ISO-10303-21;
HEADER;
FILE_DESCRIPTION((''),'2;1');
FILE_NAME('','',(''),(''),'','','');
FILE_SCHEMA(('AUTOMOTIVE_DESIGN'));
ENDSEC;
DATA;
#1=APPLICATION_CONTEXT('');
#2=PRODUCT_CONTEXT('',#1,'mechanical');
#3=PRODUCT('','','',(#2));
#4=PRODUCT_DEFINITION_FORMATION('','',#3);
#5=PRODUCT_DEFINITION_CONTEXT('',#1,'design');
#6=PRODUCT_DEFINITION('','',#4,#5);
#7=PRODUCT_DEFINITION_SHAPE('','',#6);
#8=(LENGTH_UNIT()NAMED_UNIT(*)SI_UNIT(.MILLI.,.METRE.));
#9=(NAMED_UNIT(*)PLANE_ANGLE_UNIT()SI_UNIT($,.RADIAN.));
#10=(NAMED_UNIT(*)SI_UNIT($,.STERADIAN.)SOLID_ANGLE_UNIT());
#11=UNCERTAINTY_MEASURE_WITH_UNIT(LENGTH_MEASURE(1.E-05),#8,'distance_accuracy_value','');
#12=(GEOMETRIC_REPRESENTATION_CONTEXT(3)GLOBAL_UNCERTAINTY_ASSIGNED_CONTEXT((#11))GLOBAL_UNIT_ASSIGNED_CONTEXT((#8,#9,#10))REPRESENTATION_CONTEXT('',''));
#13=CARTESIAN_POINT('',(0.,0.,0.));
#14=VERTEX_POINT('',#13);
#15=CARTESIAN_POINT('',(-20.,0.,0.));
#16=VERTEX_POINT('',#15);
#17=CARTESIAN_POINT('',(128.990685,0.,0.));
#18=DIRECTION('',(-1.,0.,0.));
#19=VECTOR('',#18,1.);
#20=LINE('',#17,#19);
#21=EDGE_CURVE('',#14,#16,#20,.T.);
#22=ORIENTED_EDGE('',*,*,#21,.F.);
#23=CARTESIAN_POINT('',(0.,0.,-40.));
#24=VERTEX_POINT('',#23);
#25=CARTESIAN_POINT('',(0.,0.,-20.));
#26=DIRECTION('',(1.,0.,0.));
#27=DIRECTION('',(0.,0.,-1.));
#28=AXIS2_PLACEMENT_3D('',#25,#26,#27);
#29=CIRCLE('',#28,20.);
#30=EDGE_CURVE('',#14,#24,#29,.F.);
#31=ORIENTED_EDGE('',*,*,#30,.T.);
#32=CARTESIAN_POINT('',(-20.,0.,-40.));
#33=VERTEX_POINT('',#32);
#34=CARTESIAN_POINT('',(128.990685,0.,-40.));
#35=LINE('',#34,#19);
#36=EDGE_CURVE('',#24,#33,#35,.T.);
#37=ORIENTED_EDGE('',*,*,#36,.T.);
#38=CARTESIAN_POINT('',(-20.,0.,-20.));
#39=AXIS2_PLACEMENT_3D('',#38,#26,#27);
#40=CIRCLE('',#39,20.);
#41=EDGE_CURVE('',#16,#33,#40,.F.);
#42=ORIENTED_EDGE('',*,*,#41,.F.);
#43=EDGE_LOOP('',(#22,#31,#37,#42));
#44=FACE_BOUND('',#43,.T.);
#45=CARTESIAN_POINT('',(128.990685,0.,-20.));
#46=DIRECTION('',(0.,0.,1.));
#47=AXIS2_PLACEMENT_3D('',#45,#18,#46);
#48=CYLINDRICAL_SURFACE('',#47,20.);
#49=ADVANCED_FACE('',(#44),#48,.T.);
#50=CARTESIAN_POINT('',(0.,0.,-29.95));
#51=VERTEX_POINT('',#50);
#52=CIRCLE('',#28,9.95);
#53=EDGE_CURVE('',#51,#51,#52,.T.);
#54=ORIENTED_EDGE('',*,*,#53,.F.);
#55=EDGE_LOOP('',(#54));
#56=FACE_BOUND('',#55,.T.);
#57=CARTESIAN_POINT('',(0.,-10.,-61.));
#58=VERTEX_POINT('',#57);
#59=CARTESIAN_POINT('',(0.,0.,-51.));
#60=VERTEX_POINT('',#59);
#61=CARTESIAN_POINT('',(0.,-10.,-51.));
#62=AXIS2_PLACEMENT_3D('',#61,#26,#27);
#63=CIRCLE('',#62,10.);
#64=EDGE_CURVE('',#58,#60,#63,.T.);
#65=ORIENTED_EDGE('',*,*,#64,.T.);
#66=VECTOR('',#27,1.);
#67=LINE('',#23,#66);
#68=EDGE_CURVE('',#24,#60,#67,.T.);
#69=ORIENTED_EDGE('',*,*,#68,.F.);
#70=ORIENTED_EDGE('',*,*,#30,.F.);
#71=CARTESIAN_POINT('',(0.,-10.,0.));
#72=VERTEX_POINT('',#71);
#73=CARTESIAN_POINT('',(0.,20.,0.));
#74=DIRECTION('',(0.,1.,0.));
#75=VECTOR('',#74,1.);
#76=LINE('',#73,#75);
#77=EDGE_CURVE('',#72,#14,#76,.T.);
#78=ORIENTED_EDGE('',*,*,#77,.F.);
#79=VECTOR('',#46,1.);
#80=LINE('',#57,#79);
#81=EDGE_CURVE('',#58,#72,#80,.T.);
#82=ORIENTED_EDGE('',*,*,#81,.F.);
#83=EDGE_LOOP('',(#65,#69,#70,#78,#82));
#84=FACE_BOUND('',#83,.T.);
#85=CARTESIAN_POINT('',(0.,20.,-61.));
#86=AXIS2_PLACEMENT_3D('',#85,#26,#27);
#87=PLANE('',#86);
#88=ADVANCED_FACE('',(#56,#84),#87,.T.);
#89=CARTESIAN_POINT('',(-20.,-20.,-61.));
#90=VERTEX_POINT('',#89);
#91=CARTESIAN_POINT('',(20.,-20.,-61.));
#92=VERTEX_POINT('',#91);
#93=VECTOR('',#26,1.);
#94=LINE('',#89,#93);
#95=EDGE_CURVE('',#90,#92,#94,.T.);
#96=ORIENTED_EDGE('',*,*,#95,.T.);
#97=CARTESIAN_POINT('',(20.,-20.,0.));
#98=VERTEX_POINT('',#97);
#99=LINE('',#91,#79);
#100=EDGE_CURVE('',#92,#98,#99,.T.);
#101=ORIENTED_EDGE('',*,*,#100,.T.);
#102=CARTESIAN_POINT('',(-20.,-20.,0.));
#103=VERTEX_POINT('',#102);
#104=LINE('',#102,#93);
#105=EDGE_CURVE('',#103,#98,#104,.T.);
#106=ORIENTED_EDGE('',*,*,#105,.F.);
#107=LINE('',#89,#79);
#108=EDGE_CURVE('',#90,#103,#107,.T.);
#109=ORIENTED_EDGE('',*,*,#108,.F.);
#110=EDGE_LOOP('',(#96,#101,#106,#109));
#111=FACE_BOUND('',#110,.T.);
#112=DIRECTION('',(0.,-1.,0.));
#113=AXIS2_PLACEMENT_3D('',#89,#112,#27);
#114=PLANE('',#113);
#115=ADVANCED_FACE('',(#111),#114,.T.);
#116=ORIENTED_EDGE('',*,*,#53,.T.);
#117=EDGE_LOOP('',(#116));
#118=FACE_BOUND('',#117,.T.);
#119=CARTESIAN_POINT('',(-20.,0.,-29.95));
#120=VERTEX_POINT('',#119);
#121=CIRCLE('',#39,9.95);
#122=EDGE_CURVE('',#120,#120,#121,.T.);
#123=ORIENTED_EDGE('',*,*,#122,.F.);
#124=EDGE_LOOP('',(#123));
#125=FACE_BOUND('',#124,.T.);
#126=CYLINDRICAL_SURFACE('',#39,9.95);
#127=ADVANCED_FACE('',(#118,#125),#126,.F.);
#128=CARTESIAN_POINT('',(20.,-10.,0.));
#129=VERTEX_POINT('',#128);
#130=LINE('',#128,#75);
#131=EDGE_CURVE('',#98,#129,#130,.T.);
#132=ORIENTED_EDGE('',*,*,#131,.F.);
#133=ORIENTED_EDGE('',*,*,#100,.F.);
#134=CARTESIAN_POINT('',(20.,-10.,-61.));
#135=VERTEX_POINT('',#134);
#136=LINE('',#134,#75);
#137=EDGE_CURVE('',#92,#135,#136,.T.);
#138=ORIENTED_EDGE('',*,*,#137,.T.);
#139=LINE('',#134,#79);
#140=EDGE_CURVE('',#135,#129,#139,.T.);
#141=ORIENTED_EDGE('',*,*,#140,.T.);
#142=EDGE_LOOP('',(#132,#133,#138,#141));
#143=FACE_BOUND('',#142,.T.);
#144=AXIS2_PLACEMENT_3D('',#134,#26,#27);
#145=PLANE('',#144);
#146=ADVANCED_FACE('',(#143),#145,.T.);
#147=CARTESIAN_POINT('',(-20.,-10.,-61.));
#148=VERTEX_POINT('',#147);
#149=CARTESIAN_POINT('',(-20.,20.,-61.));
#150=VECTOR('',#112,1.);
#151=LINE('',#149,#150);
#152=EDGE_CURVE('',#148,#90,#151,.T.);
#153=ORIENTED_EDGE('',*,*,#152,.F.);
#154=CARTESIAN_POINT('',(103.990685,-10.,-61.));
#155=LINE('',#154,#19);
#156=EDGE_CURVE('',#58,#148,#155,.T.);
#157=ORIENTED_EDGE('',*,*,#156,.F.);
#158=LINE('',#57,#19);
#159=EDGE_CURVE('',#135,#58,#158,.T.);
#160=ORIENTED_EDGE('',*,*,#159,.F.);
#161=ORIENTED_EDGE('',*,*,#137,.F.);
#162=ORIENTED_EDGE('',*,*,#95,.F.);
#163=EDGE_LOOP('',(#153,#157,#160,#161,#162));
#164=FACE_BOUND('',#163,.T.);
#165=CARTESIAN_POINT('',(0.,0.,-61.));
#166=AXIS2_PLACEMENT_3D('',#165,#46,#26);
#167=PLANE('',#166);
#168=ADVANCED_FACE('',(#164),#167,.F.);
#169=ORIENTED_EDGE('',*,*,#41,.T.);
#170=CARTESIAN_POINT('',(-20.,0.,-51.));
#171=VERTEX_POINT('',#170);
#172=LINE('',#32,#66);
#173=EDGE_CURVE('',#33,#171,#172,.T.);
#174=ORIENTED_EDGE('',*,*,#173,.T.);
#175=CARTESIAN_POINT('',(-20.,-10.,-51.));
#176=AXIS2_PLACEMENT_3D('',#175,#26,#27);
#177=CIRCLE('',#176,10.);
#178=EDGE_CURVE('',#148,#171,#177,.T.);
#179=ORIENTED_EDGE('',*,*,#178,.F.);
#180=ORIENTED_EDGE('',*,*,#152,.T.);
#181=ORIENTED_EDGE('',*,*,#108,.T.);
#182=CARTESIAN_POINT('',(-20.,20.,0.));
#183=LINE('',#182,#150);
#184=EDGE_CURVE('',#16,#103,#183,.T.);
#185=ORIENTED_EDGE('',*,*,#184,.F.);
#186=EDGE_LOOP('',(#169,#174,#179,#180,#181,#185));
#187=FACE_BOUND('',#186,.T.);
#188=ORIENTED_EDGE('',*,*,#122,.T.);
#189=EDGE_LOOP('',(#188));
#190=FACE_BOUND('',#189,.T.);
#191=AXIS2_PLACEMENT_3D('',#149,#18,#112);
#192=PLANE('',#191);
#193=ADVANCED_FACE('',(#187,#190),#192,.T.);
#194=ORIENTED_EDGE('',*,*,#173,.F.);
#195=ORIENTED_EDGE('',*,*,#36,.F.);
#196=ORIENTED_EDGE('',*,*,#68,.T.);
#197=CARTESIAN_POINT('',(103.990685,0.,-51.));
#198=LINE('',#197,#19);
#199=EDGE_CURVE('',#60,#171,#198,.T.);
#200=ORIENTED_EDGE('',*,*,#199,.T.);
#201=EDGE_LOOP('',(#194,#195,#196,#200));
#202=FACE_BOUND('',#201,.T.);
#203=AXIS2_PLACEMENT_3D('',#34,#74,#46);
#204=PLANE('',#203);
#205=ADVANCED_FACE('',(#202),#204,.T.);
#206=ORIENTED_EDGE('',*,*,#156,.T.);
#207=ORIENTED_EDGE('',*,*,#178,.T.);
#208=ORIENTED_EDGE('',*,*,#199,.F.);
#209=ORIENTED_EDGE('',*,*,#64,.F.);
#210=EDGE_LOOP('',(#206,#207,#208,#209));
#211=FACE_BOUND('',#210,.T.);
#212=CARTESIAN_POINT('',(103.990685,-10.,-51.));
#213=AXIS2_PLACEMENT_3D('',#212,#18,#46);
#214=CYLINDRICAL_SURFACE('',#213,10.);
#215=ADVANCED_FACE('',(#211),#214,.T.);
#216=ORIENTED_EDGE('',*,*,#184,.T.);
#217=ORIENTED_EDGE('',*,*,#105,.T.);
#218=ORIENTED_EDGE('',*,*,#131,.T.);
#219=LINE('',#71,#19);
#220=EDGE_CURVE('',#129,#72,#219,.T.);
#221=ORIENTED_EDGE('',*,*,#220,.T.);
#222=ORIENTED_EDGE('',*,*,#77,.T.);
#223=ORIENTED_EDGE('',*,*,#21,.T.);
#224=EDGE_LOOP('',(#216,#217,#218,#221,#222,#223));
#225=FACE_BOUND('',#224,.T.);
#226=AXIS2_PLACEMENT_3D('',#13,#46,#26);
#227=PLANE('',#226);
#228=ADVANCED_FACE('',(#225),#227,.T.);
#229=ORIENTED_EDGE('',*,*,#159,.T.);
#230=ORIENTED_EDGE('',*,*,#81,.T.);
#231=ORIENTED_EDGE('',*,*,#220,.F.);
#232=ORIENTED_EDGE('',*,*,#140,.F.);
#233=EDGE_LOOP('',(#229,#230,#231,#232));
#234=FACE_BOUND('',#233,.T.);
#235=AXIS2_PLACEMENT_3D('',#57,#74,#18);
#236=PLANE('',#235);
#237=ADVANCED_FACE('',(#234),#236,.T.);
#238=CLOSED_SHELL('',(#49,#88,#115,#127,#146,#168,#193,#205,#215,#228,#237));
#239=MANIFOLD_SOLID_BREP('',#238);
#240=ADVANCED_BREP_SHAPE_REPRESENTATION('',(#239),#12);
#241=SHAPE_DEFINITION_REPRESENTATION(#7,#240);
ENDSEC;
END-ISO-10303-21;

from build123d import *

# Parameters (mm, degrees)
BOSS_EXTRUDE1_DEPTH     = 61
CUT_EXTRUDE2_DEPTH      = 68.238381896
CUT_EXTRUDE2_DEPTH_BACK = 20
SKETCH3_R               = 9.95
CUT_EXTRUDE3_DEPTH      = 20
CUT_EXTRUDE7_START      = -20
CUT_EXTRUDE7_DEPTH      = 20


# Read off the part's stored shape, not the designer's step: Cut-Extrude7
with BuildPart() as part:
    # Sketch1 → Boss-Extrude1 (new body)
    with BuildSketch(Plane.XY):
        Polygon((0, -10), (20, -10), (20, -20), (-20, -20), (-20, 20), (0, 20), align=None)
    extrude(amount=-BOSS_EXTRUDE1_DEPTH)

    # Sketch2 → Cut-Extrude2 (cut, two sides: drawn at the far end of the back side and taken through both)
    with BuildSketch(Plane(origin=(0, 0, 0), x_dir=(0, 0, -1), z_dir=(1, 0, 0)).offset(-CUT_EXTRUDE2_DEPTH_BACK)):
        with BuildLine():
            Line((0, -138.390030766), (0, 0))
            ThreePointArc((0, 0), (20, 20), (40, 0))
            Line((40, 0), (61, 0))
            Line((61, 0), (199.390030766, 0))
            Line((199.390030766, 0), (41.573756452, 227.379036023))
            Line((41.573756452, 227.379036023), (-157.816274314, 88.989005258))
            Line((-157.816274314, 88.989005258), (0, -138.390030766))
        make_face()
    extrude(amount=CUT_EXTRUDE2_DEPTH + CUT_EXTRUDE2_DEPTH_BACK, mode=Mode.SUBTRACT)

    # Sketch3 → Cut-Extrude3 (cut)
    with BuildSketch(Plane(origin=(0, 0, 0), x_dir=(0, 0, -1), z_dir=(1, 0, 0))):
        with Locations((20, 0)):
            Circle(SKETCH3_R)
    extrude(amount=-CUT_EXTRUDE3_DEPTH, mode=Mode.SUBTRACT)

    # Cut-Extrude7 outline → Cut-Extrude7 (cut)
    with BuildSketch(Plane(origin=(0, 0, 0), x_dir=(0, 0, -1), z_dir=(1, 0, 0)).offset(CUT_EXTRUDE7_START)):
        with BuildLine():
            Line((61, 0), (51, 0))
            ThreePointArc((51, 0), (58.071067812, -2.928932188), (61, -10))
            Line((61, -10), (61, 0))
        make_face()
    extrude(amount=CUT_EXTRUDE7_DEPTH, mode=Mode.SUBTRACT)


solid = part.part
